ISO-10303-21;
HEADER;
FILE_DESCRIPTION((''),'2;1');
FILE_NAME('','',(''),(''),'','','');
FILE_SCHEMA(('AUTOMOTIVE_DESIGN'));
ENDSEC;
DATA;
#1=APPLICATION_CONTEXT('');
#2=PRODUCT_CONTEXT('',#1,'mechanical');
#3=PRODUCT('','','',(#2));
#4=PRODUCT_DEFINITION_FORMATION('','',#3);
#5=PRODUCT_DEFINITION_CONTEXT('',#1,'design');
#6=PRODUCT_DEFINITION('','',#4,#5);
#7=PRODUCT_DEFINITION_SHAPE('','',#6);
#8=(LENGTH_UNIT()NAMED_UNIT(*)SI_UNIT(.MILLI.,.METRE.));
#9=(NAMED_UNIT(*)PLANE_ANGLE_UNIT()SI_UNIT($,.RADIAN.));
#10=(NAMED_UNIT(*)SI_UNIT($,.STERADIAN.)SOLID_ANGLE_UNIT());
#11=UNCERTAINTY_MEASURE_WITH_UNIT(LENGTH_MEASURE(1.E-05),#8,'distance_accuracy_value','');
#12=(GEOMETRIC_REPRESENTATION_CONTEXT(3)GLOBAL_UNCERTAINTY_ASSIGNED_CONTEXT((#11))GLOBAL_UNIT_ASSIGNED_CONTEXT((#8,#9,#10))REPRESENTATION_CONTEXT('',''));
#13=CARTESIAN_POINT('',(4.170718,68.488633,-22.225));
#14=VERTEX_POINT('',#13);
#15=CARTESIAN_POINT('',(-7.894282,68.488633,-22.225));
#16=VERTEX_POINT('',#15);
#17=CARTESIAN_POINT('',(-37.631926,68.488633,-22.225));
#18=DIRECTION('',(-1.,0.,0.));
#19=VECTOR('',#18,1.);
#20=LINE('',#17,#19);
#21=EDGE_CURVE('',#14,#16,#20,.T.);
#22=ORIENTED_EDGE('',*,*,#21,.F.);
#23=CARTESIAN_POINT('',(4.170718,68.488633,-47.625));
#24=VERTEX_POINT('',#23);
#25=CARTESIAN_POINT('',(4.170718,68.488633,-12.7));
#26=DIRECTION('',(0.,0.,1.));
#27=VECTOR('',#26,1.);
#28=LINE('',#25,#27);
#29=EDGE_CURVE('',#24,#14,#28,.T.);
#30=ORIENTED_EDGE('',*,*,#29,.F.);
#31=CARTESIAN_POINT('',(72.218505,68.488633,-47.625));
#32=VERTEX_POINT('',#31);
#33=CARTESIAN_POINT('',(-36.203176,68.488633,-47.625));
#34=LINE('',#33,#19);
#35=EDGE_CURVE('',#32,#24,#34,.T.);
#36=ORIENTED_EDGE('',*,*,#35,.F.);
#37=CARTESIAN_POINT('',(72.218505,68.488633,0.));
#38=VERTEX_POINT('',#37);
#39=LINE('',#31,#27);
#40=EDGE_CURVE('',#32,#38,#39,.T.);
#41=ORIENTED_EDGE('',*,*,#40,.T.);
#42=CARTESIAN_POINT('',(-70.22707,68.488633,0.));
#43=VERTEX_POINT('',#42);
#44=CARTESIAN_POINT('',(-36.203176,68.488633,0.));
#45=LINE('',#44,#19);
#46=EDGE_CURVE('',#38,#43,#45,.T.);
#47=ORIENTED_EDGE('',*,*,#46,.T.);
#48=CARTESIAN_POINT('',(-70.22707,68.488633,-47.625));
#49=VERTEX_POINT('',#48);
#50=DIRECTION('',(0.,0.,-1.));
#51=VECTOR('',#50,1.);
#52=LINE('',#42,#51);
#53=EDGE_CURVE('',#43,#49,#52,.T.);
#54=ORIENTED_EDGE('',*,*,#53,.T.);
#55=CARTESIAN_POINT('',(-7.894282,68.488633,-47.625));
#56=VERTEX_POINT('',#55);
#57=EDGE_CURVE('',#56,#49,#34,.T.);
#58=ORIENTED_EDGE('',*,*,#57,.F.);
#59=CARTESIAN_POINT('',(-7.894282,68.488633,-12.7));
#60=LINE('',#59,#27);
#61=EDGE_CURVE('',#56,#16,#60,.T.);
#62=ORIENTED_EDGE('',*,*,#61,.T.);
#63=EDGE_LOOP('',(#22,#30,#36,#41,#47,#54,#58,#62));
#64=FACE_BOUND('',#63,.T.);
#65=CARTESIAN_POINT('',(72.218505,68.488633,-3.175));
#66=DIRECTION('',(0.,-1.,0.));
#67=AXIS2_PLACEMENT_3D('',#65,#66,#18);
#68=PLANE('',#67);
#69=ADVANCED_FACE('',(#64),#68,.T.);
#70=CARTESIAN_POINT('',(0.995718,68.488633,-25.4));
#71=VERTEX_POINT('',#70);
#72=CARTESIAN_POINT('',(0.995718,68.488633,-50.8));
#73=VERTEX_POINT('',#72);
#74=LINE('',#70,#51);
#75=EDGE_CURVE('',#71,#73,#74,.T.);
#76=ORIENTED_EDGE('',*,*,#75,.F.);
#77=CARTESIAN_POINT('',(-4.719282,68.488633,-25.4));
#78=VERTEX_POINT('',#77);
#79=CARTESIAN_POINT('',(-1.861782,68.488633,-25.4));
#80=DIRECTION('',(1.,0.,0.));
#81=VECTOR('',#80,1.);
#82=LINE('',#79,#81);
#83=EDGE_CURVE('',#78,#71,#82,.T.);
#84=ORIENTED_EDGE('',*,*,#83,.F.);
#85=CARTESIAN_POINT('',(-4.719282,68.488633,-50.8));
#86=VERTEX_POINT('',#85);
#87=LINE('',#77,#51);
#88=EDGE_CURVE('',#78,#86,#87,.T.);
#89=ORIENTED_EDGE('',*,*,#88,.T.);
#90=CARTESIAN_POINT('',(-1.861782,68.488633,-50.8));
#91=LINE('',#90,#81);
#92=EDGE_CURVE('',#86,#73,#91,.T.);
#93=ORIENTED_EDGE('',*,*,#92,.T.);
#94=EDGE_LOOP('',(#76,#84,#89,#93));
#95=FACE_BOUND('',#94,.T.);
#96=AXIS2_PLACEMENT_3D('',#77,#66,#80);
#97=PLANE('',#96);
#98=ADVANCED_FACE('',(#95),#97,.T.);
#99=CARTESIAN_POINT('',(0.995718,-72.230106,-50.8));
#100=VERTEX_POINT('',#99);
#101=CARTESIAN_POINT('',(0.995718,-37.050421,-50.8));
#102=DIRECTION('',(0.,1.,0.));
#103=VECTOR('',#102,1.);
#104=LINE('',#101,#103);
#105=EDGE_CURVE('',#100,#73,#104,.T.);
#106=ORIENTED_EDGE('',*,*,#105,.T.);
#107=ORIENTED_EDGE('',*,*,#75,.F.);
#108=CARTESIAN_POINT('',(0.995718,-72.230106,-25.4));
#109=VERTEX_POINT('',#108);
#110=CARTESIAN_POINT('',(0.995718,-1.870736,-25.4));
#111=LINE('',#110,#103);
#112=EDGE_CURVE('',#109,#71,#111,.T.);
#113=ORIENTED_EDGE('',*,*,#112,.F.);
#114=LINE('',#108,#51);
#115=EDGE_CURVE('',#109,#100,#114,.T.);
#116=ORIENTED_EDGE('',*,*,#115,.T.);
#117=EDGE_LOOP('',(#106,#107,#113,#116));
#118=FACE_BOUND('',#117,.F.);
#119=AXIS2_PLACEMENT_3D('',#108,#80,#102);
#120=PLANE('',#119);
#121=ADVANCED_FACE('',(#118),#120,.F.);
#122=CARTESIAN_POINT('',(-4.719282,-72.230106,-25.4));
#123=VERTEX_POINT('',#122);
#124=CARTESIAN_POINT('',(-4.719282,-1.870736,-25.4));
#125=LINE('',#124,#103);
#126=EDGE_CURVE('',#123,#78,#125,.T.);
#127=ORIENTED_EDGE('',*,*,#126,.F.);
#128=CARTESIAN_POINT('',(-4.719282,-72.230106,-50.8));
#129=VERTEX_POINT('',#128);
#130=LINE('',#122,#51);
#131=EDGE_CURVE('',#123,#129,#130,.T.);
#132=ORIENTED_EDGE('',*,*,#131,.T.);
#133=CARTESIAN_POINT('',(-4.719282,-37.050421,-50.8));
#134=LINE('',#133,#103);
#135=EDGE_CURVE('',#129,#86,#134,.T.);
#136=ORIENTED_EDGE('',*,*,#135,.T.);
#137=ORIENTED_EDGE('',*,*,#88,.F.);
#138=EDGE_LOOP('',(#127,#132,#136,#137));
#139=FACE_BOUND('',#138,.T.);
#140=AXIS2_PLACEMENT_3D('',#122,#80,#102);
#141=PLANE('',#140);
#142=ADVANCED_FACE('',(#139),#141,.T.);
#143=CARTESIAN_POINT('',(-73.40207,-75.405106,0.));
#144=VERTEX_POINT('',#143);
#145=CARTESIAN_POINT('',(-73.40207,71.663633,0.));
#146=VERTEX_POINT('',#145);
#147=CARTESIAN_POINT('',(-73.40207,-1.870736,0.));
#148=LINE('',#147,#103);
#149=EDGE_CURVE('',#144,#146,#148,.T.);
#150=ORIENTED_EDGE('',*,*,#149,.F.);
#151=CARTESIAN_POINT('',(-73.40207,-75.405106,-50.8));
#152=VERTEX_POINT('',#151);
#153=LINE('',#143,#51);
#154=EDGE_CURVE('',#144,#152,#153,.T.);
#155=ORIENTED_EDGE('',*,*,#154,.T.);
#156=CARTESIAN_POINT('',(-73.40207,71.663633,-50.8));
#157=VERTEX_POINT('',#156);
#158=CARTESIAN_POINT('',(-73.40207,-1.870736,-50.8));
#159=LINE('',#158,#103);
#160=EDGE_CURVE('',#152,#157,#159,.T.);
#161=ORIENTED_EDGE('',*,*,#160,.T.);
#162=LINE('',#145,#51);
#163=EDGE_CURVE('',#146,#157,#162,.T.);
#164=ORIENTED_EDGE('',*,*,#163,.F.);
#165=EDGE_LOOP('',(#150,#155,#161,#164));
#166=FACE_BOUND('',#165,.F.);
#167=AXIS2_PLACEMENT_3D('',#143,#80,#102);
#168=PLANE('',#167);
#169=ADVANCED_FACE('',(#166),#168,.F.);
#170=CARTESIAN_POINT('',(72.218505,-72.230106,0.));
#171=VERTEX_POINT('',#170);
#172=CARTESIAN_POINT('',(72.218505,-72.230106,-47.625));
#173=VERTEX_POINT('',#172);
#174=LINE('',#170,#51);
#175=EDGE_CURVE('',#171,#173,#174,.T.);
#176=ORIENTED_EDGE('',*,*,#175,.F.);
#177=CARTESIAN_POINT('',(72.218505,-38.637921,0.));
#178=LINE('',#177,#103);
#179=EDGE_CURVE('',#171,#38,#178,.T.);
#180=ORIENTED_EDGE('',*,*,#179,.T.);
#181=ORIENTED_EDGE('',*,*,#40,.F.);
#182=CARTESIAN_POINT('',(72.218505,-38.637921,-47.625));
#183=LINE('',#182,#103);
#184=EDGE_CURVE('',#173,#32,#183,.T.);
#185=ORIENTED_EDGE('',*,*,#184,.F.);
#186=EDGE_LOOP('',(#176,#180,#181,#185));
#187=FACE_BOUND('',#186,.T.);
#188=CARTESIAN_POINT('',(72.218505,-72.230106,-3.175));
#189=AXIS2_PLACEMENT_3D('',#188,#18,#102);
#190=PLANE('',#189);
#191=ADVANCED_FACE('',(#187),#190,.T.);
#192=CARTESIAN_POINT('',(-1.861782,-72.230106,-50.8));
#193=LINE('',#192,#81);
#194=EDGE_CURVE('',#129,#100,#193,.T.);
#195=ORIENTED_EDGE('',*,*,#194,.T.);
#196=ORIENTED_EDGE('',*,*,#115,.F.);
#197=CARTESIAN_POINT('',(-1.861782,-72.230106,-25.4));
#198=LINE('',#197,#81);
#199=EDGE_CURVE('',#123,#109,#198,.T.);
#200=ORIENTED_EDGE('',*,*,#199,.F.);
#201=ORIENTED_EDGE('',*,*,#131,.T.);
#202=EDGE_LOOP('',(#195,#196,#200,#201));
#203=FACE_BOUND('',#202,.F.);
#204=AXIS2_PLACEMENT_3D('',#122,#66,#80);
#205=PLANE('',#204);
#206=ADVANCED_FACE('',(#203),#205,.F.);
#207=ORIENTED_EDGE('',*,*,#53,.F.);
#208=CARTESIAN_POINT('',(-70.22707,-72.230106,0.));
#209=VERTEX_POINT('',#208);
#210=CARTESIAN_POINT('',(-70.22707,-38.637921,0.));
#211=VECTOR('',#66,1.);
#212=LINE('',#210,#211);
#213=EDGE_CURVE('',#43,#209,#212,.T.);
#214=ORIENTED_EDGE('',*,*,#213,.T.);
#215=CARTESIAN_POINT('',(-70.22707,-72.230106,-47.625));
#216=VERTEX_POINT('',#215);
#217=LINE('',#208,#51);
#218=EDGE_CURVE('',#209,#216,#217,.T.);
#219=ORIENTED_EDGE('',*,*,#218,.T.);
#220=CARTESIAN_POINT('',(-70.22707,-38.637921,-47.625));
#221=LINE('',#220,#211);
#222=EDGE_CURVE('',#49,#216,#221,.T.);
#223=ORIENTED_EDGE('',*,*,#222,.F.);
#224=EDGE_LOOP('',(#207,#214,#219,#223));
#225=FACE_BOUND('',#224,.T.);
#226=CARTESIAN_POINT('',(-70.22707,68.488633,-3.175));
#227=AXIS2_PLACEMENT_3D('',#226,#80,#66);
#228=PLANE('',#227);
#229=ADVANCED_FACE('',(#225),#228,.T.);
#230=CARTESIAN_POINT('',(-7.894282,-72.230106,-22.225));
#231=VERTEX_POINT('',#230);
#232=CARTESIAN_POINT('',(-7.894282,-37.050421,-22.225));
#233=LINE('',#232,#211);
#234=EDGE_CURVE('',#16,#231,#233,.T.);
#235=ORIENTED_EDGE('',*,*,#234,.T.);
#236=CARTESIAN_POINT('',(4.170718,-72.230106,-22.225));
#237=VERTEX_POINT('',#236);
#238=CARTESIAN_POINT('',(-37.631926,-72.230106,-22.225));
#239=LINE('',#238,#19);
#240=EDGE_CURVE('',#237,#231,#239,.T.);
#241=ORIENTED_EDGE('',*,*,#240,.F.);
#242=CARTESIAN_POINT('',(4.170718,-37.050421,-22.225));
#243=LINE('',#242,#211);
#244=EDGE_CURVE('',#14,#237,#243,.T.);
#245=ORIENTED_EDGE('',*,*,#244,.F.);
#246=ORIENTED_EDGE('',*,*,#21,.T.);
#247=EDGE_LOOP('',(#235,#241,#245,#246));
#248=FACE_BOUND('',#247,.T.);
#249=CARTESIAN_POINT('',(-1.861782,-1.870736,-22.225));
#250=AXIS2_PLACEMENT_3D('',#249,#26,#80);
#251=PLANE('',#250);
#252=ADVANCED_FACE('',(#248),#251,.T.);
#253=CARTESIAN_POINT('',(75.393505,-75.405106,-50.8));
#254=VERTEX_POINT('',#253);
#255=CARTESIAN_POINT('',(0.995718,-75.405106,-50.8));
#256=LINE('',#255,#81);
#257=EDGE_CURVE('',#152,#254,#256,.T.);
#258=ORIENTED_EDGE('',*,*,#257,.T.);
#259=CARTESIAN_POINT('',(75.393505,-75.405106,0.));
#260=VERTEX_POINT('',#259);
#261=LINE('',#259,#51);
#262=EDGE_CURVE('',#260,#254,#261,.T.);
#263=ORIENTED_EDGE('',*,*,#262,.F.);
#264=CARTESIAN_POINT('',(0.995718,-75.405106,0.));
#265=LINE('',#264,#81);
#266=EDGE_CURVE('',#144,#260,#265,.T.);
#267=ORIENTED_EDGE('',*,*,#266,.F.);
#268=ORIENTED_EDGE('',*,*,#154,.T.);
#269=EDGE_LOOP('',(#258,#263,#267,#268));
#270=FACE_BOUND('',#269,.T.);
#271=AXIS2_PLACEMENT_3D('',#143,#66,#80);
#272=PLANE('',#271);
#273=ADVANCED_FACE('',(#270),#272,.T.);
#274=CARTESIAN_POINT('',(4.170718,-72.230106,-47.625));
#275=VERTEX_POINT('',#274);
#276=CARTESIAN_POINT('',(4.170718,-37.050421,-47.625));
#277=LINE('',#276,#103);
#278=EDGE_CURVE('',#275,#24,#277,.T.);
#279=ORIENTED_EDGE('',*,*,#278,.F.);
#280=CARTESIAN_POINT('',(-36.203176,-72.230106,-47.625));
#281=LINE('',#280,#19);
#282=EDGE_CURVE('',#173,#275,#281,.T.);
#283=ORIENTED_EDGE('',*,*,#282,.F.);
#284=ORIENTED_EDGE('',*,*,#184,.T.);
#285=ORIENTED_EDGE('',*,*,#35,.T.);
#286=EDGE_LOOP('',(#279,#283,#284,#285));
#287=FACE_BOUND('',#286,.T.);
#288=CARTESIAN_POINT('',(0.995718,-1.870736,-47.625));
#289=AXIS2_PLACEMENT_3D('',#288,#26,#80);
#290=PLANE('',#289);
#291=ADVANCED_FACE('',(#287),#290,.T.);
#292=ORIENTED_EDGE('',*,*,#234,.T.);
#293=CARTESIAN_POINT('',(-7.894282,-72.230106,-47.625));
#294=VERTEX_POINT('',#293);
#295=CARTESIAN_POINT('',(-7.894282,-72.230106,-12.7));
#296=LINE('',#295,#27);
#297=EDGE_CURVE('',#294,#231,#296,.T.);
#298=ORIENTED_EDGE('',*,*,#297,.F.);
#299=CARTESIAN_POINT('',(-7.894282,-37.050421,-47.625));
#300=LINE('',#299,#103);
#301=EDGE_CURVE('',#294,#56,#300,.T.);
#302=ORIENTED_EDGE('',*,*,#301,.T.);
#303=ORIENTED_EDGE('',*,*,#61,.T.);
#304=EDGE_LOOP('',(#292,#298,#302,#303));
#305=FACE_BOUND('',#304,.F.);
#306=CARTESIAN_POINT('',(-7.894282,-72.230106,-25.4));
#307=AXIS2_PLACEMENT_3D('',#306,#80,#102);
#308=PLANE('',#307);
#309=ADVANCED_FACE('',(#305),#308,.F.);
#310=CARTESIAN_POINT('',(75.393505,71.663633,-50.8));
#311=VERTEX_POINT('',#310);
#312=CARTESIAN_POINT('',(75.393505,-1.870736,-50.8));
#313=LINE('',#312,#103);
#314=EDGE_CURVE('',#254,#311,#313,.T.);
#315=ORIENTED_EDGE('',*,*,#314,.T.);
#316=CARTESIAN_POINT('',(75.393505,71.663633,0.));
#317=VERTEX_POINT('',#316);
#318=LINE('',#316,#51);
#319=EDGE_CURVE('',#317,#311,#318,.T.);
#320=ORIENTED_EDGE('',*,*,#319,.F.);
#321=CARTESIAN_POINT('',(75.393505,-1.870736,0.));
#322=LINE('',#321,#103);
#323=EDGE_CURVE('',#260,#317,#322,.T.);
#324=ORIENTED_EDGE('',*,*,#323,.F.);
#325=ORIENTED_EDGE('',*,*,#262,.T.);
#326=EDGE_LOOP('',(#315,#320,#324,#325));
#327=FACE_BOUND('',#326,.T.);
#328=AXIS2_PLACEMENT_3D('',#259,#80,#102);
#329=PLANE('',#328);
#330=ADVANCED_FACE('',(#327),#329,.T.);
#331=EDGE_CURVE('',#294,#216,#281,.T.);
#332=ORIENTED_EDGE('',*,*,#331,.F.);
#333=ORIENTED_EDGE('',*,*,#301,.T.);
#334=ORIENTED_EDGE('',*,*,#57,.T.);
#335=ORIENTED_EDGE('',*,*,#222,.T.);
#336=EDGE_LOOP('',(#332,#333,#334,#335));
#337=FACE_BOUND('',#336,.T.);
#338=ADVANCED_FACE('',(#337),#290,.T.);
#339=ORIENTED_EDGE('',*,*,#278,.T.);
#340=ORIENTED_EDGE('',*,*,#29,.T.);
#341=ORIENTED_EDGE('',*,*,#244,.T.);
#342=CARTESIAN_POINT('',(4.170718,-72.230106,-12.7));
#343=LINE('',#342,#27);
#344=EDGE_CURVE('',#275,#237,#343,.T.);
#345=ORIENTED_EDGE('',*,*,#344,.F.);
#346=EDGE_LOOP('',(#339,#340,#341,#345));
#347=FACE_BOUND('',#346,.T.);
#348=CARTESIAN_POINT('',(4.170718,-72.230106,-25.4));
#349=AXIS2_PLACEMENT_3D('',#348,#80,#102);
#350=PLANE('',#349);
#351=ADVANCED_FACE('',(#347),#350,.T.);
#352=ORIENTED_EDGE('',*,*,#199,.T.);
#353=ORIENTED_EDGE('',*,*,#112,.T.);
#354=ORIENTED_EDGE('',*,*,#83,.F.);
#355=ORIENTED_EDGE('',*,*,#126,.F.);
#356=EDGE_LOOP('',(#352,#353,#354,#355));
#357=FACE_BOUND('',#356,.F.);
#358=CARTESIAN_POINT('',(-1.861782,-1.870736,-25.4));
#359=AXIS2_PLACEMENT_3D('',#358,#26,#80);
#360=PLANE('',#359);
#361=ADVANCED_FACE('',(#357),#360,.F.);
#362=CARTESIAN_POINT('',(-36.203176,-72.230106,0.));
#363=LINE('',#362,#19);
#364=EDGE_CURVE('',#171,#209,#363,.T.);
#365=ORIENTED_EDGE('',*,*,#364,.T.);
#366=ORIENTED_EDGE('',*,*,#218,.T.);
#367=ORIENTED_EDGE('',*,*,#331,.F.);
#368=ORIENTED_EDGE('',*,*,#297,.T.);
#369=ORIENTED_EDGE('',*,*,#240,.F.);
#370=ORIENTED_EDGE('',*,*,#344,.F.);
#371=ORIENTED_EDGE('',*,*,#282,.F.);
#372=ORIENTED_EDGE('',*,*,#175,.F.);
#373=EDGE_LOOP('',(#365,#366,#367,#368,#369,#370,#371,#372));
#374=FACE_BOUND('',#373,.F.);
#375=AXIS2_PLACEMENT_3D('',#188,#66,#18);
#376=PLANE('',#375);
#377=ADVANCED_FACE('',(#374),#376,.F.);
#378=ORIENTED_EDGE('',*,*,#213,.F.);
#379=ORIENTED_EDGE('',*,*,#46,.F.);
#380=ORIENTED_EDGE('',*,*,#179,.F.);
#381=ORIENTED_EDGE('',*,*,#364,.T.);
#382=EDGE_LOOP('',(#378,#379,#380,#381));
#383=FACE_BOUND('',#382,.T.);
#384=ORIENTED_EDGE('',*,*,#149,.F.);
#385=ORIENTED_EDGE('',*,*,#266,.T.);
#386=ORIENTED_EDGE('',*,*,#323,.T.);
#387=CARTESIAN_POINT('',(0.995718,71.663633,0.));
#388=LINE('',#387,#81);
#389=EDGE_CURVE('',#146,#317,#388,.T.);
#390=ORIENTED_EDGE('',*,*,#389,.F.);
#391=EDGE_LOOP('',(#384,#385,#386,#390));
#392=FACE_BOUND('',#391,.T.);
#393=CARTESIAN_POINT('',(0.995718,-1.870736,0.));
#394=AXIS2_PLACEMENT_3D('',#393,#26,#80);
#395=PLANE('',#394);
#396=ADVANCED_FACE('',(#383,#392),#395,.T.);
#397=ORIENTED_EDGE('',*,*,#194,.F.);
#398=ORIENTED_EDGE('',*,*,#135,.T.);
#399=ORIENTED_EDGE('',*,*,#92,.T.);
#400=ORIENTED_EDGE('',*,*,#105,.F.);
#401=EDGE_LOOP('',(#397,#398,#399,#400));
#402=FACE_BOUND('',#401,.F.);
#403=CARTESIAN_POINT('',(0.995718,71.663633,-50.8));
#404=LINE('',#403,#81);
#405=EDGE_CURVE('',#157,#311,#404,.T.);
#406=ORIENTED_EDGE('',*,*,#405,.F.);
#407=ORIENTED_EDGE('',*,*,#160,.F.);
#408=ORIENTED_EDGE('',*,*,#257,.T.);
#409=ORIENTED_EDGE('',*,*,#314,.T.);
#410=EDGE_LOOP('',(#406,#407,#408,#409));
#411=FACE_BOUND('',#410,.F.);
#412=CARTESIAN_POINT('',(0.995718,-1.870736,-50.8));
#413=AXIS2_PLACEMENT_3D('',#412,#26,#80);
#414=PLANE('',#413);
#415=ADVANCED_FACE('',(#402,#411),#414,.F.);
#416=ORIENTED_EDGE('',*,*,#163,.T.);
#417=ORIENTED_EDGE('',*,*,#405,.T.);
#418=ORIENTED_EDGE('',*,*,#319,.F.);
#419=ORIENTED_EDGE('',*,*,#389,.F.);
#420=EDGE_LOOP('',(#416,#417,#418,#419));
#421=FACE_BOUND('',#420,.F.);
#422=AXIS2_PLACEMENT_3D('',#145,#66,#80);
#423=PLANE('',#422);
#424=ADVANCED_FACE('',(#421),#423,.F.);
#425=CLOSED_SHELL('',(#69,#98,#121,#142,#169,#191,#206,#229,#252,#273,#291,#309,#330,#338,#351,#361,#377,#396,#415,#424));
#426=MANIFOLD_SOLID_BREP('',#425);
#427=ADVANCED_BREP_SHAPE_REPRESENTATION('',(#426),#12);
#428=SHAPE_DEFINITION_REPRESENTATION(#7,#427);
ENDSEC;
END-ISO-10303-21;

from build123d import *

# Parameters (mm, degrees)
F0_W     = 148.7955749035
F0_H     = 147.0687389374
F1_DEPTH = 50.8
F3_START = -25.4
F2_W     = 5.715
F2_H     = 140.7187389374
F3_DEPTH = 38.1
F4_T     = -3.175


# Not quite as in the source:
# - a shell that OpenCascade refuses in one call is made with other operations: the cavity is built on its own and cut out


with BuildPart() as f1:
    # F0 (on Top) → F1 (new body)
    with BuildSketch(Plane.XY):
        with Locations((0.9957179427, -1.8707364798)):
            Rectangle(F0_W, F0_H)
    extrude(amount=-F1_DEPTH)

    # F2 (on face) → F3 (cut)
    with BuildSketch(Plane.XY.offset(F3_START)):
        with Locations((-1.8617820573, -1.8707364798)):
            Rectangle(F2_W, F2_H)
    extrude(amount=-F3_DEPTH, mode=Mode.SUBTRACT)

    # F4: a shell. OpenCascade refuses it in one call, so the cavity is built on its own and cut out:
    # the body offset inwards by the wall thickness, plus a prism from it out through each open face.
    f4_core = offset(f1.part, amount=F4_T, kind=Kind.INTERSECTION, mode=Mode.PRIVATE)
    f4_exits = [f4_core.faces().sort_by_distance(p)[0] for p in [
        (0.995718, -1.870736, -3.175),
    ]]
    add(f4_core, mode=Mode.SUBTRACT)
    extrude(f4_exits, amount=-F4_T, mode=Mode.SUBTRACT)


solid = f1.part
